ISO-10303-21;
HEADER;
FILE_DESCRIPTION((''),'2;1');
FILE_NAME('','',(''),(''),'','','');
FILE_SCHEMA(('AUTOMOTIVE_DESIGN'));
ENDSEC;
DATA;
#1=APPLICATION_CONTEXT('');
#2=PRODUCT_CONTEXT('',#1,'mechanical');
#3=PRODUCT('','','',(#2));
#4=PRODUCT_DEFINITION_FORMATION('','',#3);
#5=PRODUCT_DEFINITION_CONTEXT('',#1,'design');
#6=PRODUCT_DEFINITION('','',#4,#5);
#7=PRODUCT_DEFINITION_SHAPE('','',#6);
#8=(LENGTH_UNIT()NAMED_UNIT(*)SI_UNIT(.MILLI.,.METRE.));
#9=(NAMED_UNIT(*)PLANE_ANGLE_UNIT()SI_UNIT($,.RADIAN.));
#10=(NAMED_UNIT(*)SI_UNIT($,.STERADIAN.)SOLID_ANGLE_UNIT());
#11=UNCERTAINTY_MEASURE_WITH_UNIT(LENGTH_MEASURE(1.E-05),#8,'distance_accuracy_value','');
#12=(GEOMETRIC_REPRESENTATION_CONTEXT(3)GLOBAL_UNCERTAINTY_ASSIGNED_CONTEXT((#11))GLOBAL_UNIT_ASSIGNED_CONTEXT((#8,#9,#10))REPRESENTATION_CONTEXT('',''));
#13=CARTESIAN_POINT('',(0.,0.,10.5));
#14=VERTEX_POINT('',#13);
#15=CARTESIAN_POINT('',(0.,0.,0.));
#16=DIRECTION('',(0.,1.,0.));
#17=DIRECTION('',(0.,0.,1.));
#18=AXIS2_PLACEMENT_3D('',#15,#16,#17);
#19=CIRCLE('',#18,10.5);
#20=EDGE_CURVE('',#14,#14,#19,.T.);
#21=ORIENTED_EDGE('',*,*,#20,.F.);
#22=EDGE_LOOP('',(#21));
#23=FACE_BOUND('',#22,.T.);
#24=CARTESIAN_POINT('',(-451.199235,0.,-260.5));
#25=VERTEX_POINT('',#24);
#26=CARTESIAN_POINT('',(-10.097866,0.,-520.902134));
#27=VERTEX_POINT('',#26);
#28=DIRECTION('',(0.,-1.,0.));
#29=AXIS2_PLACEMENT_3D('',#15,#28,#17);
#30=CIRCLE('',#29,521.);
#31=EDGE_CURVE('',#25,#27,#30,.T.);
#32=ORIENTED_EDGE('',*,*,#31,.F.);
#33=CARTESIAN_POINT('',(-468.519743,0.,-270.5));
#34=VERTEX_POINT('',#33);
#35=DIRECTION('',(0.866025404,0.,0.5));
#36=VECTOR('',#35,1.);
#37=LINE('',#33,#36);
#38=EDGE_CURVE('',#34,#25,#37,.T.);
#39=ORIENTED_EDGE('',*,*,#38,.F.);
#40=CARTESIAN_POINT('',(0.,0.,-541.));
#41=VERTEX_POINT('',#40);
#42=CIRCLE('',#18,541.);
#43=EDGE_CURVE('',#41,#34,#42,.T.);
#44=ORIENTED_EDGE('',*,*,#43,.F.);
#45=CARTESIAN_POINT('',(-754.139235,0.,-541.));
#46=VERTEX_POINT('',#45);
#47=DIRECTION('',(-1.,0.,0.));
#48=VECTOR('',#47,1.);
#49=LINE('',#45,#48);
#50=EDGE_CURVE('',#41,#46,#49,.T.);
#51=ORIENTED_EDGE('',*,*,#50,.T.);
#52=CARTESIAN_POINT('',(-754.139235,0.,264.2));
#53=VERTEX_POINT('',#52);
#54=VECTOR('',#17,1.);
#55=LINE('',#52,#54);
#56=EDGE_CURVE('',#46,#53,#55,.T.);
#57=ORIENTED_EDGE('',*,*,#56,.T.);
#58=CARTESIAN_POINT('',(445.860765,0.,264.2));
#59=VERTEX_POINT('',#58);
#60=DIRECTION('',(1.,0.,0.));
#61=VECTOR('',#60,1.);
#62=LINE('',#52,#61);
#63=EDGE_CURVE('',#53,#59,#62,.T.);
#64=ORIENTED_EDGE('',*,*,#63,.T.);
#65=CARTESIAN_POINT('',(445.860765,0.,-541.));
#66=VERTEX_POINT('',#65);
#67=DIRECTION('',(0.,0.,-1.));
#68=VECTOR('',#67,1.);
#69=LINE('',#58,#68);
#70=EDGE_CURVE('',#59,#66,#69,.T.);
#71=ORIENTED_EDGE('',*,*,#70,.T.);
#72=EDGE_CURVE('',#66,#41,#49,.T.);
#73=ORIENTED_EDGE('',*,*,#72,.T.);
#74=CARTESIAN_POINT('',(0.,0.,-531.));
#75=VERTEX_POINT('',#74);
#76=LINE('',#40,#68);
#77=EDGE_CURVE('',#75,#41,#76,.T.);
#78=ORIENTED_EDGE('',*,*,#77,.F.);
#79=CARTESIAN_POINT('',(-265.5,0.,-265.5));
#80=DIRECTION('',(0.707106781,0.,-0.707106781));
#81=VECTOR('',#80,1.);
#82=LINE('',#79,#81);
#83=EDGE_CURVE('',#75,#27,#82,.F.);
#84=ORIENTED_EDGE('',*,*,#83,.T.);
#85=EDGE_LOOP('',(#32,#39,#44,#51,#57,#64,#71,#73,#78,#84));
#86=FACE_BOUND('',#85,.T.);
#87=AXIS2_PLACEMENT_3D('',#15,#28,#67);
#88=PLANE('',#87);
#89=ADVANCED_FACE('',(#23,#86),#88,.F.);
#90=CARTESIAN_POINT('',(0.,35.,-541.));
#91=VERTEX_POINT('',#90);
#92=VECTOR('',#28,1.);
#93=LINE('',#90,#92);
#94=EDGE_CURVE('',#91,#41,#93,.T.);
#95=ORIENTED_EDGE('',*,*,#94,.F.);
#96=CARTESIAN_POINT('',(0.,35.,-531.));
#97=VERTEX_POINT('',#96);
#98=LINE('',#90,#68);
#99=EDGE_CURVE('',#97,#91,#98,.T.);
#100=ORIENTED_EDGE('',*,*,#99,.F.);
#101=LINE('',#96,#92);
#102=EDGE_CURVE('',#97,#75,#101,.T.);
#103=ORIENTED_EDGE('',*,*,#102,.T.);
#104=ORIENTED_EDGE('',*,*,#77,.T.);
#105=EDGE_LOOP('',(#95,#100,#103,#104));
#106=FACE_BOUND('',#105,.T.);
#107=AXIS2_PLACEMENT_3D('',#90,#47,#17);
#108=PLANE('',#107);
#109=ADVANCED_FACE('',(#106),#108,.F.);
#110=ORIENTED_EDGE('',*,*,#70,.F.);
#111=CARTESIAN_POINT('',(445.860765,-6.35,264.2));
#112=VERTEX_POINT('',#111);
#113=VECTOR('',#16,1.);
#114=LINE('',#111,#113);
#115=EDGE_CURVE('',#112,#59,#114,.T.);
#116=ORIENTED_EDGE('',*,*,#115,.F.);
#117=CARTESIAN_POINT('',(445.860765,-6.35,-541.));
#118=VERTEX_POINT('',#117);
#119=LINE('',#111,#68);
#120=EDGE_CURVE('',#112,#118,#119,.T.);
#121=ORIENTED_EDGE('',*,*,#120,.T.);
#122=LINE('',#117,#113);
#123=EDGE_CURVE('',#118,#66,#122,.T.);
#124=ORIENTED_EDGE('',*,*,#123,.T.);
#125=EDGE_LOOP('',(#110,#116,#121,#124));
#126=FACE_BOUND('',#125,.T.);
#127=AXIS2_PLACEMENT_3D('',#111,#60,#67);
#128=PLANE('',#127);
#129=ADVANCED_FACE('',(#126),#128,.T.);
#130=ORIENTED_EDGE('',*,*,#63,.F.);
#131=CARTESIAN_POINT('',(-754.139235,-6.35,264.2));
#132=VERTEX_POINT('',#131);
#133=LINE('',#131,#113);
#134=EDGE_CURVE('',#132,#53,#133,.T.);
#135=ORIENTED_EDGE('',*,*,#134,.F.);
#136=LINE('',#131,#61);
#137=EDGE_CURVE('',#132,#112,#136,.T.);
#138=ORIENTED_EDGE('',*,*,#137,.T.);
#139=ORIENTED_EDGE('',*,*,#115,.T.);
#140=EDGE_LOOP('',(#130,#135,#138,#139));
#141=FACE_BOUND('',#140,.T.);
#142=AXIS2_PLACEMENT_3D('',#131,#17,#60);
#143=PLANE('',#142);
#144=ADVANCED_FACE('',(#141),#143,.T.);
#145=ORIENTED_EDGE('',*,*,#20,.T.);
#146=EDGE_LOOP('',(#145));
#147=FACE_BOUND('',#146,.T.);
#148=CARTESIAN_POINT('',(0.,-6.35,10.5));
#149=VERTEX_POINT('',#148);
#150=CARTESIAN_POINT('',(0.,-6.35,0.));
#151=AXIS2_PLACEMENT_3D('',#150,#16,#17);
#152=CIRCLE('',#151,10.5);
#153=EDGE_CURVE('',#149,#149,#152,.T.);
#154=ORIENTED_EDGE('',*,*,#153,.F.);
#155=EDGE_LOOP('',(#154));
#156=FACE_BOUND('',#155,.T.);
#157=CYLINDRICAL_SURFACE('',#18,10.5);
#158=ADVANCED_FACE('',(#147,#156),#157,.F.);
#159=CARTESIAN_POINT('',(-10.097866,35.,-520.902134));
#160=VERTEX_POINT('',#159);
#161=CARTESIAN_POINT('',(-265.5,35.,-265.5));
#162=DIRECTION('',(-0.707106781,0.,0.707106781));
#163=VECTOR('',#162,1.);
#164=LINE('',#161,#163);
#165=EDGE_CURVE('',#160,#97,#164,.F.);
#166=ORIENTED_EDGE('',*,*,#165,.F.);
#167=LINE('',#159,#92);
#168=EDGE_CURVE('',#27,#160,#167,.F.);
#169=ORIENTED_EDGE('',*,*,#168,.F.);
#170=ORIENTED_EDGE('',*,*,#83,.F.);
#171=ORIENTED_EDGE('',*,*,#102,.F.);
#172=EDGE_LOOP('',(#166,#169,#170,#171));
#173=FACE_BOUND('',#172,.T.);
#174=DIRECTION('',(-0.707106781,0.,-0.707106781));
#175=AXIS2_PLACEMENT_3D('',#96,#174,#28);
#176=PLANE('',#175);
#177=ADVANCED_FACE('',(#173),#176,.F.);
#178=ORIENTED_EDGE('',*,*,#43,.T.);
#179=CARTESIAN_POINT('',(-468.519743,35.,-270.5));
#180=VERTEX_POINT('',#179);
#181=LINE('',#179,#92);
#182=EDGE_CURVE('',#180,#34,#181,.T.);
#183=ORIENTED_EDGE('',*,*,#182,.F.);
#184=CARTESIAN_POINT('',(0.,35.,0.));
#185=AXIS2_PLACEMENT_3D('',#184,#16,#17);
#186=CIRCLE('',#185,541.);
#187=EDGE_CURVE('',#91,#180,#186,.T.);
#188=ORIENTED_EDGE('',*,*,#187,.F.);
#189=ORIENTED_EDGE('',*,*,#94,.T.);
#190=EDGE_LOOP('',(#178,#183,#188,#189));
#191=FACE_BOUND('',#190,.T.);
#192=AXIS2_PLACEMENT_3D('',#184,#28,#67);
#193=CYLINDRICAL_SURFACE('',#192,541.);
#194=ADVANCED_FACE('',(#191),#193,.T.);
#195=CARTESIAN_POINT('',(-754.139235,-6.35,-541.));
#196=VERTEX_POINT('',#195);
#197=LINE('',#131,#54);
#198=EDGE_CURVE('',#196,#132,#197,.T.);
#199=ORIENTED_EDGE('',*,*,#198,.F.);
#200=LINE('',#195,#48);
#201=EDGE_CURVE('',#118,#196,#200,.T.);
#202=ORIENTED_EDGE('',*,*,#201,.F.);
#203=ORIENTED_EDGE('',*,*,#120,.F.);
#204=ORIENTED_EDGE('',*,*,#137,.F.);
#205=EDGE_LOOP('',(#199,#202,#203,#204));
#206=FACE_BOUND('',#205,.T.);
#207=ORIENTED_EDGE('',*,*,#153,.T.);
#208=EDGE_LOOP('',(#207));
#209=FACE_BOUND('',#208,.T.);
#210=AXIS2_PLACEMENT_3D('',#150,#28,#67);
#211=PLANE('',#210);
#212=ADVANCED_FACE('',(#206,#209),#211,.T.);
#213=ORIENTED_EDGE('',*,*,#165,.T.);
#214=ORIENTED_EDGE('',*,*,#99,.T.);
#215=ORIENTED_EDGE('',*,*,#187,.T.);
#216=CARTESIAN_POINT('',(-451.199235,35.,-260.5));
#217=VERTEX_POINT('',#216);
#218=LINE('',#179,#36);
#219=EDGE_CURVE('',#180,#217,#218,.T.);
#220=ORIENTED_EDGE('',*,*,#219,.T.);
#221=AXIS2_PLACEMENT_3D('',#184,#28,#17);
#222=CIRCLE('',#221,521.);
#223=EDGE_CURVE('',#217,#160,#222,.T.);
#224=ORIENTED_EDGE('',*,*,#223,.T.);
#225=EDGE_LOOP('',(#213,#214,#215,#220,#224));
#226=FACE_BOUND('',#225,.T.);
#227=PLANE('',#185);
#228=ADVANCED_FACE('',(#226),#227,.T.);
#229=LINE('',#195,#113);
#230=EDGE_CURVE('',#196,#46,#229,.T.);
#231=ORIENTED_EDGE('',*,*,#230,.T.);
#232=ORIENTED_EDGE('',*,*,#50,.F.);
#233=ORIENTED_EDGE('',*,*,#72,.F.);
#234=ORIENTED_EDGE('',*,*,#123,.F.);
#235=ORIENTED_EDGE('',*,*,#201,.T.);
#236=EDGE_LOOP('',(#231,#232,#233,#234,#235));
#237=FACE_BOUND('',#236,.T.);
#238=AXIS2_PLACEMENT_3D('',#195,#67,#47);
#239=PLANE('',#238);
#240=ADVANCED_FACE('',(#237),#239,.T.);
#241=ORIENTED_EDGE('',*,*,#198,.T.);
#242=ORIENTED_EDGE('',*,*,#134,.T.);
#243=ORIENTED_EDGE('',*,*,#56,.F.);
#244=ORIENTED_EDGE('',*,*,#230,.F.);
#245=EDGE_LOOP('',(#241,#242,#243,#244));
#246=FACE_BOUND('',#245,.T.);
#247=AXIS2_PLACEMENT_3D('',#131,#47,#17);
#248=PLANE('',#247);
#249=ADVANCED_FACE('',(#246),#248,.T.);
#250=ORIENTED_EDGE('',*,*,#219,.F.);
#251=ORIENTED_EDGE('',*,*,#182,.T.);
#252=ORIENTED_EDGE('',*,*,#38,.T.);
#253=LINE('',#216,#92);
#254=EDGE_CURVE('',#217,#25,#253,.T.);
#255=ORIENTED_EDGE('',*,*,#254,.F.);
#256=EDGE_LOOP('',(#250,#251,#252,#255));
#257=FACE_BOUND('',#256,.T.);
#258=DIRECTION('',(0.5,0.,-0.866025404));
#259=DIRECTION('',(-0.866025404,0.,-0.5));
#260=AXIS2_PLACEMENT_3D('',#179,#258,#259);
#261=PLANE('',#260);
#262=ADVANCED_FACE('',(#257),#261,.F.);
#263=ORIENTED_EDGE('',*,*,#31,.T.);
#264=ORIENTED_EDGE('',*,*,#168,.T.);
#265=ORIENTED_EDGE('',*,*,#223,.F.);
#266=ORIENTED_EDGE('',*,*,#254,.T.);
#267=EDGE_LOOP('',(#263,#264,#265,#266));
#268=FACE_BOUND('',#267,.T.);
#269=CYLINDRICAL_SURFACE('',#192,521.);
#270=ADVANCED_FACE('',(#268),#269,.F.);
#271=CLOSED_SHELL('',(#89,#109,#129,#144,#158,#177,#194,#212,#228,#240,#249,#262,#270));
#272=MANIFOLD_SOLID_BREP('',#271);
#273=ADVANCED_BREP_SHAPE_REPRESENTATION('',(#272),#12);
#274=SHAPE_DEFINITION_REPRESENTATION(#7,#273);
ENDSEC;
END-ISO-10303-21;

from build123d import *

# Parameters (mm, degrees)
BOSS_EXTRUDE1_DEPTH    = 35
SKETCH4_W              = 1200
SKETCH4_H              = 805.2
BOSS_EXTRUDE2_DEPTH    = 6.35
CHAMFER1_SIZE          = 10
F_20_0MM_DOWEL_HOLE1_D = 21


with BuildPart() as part:
    # Sketch3 → Boss-Extrude1 (new body)
    with BuildSketch(Plane(origin=(0, 0, 0), x_dir=(1, 0, 0), z_dir=(0, 1, 0))):
        with BuildLine():
            Line((0, 541), (0, 521))
            ThreePointArc((0, 521), (-260.5, 451.199235372), (-451.199235372, 260.5))
            Line((-451.199235372, 260.5), (-468.519743447, 270.5))
            ThreePointArc((-468.519743447, 270.5), (-270.5, 468.519743447), (0, 541))
        make_face()
    extrude(amount=BOSS_EXTRUDE1_DEPTH)

    # Sketch4 → Boss-Extrude2 (add)
    with BuildSketch(Plane(origin=(0, 0, 0), x_dir=(1, 0, 0), z_dir=(0, 1, 0))):
        with Locations((-154.139235372, 138.4)):
            Rectangle(SKETCH4_W, SKETCH4_H)
    extrude(amount=-BOSS_EXTRUDE2_DEPTH)

    # Chamfer1
    # the kernel refuses this chamfer: 10 mm, written as the material it takes off along each edge
    with BuildSketch(Plane(origin=(0, 0, -521), x_dir=(-0.999953038196086, 0, 0.009691305506332204), z_dir=(0, 1, 0))) as chamfer1_piece_1:
        with BuildLine():
            Line((10.098340338, 0), (-CHAMFER1_SIZE * 0.00969130550633, -CHAMFER1_SIZE * 0.999953038196))
            Line((-CHAMFER1_SIZE * 0.00969130550633, -CHAMFER1_SIZE * 0.999953038196), (0, 0))
            ThreePointArc((0, 0), (5.192000536, -0.024447522), (10.098340338, 0))
        make_face()
    extrude(amount=60.969219121, mode=Mode.SUBTRACT)

    # Ø20.0mm Dowel Hole1 (through all)
    with Locations(Plane(origin=(0, 0, 0), x_dir=(1, 0, 0), z_dir=(0, 1, 0))):
        with Locations((0, 0)):
            Hole(F_20_0MM_DOWEL_HOLE1_D / 2)


solid = part.part
